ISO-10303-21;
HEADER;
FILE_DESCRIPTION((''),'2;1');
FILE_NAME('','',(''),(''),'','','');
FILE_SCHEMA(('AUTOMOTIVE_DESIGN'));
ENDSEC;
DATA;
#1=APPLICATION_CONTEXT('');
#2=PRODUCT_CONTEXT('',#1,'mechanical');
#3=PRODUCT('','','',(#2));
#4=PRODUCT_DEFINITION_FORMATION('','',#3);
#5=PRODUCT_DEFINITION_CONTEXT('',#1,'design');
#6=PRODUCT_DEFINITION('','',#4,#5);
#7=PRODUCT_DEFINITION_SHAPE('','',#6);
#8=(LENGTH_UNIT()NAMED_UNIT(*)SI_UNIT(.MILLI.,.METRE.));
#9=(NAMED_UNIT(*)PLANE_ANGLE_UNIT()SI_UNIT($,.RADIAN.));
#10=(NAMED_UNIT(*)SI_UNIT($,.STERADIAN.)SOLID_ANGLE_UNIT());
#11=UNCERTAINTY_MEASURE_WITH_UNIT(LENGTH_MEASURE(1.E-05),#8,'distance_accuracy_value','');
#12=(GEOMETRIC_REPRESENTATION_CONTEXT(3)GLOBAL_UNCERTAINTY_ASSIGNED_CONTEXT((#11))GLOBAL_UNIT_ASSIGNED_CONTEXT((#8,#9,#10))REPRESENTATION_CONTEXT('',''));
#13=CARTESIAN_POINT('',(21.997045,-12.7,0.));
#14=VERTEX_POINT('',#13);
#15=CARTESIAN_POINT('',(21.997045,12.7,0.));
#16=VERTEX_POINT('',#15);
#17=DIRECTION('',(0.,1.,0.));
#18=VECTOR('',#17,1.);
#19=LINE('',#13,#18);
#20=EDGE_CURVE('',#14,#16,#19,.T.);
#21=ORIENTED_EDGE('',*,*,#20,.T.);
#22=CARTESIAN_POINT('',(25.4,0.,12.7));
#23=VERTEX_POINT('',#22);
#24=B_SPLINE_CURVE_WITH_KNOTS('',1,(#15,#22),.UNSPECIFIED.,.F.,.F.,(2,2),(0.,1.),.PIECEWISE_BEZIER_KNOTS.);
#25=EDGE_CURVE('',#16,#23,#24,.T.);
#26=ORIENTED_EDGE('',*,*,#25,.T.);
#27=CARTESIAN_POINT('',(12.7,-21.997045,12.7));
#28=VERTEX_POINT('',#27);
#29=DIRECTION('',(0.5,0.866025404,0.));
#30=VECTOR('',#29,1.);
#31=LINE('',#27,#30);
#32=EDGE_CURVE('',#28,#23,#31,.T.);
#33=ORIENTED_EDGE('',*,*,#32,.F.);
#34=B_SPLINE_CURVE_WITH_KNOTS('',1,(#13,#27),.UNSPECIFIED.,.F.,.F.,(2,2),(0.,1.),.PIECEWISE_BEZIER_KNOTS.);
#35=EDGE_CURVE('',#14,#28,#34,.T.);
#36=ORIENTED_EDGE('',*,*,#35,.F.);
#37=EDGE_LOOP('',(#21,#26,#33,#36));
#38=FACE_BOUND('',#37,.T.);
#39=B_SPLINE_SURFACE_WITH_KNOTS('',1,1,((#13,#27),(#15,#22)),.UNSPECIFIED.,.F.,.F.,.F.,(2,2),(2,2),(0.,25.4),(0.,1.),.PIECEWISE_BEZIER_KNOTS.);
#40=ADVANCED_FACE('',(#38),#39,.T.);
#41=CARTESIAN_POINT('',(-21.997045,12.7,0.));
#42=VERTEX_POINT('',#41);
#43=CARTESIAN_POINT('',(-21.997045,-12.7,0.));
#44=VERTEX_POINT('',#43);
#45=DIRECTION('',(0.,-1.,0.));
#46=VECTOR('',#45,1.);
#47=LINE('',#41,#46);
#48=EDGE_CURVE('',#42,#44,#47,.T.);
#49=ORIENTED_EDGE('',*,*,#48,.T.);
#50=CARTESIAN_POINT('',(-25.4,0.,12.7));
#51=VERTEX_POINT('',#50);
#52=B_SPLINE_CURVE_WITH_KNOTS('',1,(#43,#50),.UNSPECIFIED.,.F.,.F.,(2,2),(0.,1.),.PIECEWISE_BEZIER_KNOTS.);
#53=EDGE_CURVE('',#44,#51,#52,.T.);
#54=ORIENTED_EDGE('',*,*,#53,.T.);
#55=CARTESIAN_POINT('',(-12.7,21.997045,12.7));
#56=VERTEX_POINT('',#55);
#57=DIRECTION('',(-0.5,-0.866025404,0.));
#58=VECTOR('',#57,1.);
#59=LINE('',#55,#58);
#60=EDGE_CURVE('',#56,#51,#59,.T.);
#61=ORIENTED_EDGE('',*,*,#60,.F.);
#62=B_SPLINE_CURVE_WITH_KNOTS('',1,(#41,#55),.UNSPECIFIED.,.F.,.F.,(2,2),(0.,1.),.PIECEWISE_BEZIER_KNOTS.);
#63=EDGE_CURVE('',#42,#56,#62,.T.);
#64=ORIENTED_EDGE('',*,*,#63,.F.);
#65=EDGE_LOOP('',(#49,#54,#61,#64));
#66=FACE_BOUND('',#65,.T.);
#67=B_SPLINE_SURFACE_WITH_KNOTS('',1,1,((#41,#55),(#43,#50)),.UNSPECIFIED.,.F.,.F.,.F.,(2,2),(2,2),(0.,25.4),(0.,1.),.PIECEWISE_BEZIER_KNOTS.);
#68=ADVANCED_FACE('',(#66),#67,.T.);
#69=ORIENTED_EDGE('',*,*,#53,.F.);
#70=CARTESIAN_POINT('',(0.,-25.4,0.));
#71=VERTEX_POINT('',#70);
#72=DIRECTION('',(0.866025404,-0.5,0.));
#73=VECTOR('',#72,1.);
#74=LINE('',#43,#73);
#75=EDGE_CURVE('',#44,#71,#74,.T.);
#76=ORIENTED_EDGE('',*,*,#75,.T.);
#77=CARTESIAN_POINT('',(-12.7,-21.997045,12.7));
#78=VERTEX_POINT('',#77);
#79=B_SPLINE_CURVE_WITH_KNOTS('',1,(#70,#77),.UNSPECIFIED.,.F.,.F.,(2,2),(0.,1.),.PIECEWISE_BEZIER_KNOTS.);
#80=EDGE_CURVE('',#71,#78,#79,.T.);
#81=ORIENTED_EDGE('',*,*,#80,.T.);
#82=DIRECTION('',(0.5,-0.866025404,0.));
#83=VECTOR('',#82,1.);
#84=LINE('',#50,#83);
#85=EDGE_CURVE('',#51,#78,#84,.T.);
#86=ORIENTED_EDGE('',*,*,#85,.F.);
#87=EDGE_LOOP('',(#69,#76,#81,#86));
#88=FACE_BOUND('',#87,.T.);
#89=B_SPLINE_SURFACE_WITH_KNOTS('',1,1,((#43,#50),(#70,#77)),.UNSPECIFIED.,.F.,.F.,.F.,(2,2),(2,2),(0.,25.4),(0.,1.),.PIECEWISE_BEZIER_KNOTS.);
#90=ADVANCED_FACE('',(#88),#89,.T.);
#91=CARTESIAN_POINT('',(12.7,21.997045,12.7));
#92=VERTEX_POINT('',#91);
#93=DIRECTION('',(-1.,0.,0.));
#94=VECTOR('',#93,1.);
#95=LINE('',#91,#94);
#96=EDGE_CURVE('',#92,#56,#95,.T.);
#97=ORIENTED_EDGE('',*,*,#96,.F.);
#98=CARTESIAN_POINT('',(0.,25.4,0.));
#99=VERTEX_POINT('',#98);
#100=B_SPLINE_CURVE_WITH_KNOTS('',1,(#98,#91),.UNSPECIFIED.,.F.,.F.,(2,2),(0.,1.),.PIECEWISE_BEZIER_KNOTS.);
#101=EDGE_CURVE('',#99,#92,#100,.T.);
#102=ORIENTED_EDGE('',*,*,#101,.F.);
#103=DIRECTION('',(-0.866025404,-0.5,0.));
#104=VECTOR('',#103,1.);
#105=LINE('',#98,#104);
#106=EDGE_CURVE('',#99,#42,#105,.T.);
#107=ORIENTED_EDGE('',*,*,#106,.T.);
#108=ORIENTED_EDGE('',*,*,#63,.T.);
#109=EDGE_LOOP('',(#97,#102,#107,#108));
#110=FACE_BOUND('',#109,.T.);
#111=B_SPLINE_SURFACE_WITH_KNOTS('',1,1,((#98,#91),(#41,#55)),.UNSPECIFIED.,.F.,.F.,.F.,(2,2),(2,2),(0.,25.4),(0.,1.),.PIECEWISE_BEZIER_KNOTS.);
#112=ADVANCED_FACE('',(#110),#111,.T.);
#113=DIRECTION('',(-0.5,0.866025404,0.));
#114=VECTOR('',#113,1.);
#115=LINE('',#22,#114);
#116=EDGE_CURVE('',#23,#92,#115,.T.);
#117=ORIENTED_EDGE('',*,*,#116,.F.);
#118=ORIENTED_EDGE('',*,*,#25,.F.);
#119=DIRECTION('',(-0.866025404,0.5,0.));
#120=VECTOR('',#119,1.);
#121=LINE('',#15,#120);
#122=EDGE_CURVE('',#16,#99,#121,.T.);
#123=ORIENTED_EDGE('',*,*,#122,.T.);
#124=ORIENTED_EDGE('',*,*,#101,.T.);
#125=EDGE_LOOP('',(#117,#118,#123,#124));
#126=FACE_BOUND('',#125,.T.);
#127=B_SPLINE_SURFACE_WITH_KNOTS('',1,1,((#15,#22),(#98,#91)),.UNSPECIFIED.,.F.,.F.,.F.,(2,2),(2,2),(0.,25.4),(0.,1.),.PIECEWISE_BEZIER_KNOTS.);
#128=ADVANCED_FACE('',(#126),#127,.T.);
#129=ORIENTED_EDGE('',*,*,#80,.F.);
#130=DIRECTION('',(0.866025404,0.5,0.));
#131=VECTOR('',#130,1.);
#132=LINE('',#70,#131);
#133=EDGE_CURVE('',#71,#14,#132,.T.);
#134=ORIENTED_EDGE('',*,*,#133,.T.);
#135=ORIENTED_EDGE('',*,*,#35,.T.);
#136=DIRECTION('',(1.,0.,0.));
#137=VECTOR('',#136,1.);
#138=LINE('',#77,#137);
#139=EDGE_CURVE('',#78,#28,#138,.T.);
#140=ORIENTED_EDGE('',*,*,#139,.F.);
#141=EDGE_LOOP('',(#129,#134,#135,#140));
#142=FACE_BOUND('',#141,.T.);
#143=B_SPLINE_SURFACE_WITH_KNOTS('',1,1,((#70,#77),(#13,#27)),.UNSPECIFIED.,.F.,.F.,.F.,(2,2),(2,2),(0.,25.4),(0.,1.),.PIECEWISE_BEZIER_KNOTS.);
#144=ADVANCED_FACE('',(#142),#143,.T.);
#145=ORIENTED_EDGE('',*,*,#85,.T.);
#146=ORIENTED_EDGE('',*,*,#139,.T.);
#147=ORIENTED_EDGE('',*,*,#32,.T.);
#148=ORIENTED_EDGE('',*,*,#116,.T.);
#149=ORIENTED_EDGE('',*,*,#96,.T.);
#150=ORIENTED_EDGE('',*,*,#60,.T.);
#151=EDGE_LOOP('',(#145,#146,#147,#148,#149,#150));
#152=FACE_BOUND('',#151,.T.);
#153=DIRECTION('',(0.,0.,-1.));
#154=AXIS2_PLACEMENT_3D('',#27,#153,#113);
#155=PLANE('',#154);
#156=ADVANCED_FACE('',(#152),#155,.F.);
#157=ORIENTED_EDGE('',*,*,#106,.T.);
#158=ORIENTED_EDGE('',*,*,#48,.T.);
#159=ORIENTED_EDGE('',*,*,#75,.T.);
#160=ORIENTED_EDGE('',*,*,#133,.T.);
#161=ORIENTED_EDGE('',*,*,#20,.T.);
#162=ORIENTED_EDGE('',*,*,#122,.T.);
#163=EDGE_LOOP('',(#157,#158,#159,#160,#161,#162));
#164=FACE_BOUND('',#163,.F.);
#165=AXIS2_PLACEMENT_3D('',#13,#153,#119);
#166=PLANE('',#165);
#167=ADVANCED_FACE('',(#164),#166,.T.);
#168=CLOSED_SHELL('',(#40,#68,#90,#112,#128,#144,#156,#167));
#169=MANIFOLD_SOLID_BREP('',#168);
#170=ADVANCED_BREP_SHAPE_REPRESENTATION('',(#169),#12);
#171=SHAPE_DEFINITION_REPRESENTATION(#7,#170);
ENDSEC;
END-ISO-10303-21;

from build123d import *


with BuildPart() as f3:
    # F0 (on Top) → F3 section 0
    with BuildSketch(Plane.XY):
        Polygon((21.9970452561, -12.7), (21.9970452561, 12.7), (0, 25.4), (-21.9970452561, 12.7), (-21.9970452561, -12.7), (0, -25.4), align=None)
    # F2 (on offset) → F3 section 1
    with BuildSketch(Plane.XY.offset(12.7)):
        Polygon((-12.7, 21.9970452561), (-25.4, 0), (-12.7, -21.9970452561), (12.7, -21.9970452561), (25.4, 0), (12.7, 21.9970452561), align=None)
    loft()


solid = f3.part
